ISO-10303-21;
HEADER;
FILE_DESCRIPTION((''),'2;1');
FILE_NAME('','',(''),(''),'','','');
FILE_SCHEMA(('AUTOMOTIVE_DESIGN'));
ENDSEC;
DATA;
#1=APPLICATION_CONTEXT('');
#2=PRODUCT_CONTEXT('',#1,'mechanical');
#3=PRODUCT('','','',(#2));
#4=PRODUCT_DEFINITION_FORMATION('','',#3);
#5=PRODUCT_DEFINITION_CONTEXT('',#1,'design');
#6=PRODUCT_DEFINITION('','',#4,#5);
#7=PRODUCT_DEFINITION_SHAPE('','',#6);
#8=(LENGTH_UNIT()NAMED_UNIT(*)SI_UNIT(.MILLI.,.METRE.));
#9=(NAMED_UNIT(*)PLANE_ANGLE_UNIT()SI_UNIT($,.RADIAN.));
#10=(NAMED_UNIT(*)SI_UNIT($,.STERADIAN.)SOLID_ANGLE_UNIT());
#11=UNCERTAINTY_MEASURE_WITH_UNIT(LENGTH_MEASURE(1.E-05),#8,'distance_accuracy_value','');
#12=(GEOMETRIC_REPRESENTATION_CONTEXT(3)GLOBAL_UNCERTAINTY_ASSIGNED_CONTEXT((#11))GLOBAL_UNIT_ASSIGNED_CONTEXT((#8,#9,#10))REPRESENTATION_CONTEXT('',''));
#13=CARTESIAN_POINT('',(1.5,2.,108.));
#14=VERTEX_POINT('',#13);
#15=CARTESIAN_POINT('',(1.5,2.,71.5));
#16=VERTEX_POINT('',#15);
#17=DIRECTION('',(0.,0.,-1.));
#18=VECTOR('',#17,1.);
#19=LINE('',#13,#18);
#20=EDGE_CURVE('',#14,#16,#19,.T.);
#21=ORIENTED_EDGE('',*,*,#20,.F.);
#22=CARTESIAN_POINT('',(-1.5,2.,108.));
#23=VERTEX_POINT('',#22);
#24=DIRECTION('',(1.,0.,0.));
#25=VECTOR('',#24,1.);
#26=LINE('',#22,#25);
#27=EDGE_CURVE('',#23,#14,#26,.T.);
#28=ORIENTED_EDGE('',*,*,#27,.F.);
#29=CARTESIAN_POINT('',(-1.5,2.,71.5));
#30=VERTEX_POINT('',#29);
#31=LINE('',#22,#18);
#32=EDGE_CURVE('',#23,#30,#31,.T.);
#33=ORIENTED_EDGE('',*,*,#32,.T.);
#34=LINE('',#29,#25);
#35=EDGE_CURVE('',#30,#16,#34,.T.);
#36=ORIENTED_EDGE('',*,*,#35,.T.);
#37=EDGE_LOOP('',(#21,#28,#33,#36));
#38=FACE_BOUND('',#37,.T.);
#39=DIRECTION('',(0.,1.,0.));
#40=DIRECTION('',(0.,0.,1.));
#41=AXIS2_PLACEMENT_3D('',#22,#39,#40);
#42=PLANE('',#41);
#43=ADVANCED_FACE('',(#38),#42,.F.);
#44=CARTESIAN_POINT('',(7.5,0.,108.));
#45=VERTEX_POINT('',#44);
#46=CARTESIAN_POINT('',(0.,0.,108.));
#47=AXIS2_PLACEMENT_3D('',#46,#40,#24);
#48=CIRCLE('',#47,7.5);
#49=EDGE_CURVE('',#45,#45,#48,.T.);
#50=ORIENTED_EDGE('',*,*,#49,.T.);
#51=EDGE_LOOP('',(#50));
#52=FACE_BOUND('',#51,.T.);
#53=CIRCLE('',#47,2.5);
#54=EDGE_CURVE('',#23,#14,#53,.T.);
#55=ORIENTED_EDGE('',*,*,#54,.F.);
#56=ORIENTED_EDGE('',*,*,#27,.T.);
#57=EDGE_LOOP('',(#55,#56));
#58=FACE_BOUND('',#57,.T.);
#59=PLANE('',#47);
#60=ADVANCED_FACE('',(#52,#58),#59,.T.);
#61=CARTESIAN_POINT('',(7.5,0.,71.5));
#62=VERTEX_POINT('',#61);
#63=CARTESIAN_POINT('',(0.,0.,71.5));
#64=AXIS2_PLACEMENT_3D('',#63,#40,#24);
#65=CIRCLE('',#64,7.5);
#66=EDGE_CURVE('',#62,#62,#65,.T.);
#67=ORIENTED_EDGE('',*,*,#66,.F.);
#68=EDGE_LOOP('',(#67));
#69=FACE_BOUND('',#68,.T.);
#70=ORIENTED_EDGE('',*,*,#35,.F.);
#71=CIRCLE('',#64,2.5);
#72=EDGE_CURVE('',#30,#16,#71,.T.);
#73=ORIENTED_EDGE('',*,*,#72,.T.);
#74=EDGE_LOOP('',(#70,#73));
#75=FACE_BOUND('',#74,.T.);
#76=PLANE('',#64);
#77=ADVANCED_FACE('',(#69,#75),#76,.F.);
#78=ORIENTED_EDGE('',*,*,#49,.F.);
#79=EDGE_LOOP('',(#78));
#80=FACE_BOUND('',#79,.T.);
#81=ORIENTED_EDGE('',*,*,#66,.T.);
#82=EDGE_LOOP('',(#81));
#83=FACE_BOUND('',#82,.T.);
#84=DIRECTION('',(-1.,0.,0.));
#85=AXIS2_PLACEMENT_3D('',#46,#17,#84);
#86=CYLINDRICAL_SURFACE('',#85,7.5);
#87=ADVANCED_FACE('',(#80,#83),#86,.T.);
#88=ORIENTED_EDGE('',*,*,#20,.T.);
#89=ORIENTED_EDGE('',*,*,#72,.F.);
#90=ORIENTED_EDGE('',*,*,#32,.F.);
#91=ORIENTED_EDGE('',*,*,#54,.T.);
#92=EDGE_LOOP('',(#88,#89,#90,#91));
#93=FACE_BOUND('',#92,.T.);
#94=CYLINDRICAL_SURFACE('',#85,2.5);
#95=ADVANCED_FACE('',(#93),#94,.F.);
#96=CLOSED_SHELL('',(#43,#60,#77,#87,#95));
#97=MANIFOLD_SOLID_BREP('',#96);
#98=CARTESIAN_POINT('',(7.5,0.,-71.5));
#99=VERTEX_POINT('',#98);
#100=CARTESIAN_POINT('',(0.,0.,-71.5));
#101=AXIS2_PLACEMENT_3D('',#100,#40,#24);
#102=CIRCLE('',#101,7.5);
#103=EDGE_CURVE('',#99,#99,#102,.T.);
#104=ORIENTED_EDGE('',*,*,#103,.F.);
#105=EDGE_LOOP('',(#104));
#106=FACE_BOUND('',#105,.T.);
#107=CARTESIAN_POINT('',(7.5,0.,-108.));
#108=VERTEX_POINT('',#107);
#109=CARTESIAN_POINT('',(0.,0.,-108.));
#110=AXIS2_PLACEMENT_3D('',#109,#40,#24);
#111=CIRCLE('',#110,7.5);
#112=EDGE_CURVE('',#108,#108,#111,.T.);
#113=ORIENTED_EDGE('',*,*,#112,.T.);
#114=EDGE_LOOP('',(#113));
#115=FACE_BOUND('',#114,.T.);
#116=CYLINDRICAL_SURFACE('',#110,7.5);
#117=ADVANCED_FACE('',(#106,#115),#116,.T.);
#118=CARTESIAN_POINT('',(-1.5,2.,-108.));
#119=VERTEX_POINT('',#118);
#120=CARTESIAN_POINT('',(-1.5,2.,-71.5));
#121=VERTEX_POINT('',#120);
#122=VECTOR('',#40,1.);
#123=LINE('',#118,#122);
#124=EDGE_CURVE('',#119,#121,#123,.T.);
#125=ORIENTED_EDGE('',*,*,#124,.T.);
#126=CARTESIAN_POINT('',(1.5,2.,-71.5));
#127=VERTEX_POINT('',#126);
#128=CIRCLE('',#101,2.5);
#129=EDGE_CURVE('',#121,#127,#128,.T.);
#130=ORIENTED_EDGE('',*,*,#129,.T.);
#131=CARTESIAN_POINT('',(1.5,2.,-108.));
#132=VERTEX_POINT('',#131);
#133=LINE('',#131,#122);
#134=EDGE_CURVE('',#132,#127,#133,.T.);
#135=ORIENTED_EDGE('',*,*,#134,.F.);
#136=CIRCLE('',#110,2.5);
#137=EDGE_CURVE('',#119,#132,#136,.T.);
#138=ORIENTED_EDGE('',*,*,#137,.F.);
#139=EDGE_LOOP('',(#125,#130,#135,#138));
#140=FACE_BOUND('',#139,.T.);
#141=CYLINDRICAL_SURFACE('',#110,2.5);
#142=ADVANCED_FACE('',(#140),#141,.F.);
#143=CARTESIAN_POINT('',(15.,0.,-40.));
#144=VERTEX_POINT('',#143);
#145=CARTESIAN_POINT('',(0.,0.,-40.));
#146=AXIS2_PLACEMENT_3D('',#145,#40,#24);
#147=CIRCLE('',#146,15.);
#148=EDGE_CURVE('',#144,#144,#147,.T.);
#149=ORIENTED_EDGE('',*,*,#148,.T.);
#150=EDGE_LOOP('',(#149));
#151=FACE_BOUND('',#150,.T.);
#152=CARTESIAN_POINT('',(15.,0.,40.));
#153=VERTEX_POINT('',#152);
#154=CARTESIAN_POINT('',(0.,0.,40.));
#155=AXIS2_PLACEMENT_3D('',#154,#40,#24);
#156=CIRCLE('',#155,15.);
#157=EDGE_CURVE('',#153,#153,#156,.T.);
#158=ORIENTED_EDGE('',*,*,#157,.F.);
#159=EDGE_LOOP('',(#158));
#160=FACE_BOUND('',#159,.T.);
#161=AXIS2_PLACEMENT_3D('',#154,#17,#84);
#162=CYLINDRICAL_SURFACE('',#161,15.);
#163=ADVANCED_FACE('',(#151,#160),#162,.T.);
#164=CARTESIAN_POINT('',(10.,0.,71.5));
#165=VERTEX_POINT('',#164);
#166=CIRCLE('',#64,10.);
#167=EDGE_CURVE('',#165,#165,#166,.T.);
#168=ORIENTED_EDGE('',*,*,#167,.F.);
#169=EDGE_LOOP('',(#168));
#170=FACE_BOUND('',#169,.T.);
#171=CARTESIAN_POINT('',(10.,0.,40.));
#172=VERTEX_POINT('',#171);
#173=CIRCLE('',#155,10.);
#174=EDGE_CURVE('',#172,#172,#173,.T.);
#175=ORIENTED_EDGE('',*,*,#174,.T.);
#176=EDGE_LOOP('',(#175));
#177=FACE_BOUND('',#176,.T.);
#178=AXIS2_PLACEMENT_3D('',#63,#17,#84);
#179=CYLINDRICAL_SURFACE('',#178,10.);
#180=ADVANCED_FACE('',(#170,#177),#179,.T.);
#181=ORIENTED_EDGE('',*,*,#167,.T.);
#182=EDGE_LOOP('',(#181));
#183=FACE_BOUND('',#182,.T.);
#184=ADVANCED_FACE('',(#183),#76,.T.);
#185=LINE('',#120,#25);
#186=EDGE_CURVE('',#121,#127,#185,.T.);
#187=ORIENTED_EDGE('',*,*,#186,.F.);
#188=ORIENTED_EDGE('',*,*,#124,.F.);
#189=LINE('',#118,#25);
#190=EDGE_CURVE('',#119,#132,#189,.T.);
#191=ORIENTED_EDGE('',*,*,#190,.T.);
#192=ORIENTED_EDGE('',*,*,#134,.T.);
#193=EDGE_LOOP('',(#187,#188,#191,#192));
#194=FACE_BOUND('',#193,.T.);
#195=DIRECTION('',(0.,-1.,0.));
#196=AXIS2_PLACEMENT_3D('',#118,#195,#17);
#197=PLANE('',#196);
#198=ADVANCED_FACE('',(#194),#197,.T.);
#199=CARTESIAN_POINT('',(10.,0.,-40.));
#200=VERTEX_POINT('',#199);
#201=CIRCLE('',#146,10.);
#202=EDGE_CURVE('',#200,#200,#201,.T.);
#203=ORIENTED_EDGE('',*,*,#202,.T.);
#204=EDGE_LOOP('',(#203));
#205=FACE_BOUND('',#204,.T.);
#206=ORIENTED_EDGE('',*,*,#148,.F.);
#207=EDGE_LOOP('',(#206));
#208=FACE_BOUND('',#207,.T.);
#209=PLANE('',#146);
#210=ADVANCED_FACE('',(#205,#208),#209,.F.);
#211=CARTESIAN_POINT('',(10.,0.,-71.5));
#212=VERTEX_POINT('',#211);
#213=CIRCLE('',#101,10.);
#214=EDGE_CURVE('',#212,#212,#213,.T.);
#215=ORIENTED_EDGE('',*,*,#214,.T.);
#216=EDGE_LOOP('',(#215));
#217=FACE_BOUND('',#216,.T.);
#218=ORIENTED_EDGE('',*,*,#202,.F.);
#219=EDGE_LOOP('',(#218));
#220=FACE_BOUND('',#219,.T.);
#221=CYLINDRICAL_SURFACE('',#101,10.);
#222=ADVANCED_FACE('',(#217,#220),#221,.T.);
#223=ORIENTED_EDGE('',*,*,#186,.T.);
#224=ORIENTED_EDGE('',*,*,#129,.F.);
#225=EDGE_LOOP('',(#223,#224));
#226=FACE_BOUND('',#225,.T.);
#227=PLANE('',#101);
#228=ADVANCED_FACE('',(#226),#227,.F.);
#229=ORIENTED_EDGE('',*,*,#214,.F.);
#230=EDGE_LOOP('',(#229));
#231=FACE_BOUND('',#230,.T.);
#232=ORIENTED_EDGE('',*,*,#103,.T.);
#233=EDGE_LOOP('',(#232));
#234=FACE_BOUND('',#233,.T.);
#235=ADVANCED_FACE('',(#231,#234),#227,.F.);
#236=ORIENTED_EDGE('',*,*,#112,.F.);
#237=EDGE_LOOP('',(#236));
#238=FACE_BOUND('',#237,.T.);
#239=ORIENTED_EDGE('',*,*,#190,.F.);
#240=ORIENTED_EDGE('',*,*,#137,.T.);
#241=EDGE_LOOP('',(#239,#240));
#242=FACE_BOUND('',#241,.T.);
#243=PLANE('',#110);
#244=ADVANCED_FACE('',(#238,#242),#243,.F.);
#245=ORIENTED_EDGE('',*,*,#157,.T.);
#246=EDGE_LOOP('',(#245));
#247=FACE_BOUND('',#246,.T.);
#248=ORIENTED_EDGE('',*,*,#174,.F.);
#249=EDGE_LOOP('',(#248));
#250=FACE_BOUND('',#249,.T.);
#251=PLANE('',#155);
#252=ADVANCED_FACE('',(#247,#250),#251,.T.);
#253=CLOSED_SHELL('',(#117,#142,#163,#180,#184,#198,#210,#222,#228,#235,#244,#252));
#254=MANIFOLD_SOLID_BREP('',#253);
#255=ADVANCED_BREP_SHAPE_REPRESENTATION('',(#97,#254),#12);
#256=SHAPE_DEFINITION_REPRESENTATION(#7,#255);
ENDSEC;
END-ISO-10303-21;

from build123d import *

# Parameters (mm, degrees)
ESQUISSE1_R        = 15
BOSS_EXTRU_1_DEPTH = 40
BOSS_EXTRU_5_START = 40
ESQUISSE1_10_R     = 10
BOSS_EXTRU_5_DEPTH = 31.5
BOSS_EXTRU_3_START = 71.5
ESQUISSE1_7_R      = 7.5
BOSS_EXTRU_3_DEPTH = 36.5
BOSS_EXTRU_4_START = -71.5
ESQUISSE1_8_R      = 7.5
BOSS_EXTRU_4_DEPTH = 36.5
BOSS_EXTRU_6_START = -71.5
ESQUISSE1_11_R     = 10
BOSS_EXTRU_6_DEPTH = 31.5


with BuildPart() as part:
    # Esquisse1 → Boss.-Extru.1 (new, symmetric)
    with BuildSketch(Plane.XY):
        Circle(ESQUISSE1_R)
    extrude(amount=BOSS_EXTRU_1_DEPTH, both=True)

    # Esquisse1<10> → Boss.-Extru.5 (add)
    with BuildSketch(Plane.XY.offset(BOSS_EXTRU_5_START)):
        Circle(ESQUISSE1_10_R)
    extrude(amount=BOSS_EXTRU_5_DEPTH)



with BuildPart() as body_2:
    # Esquisse1<7> → Boss.-Extru.3 (new body)
    with BuildSketch(Plane.XY.offset(BOSS_EXTRU_3_START)):
        Circle(ESQUISSE1_7_R)
        with BuildLine():
            Line((-1.5, 2), (1.5, 2))
            ThreePointArc((1.5, 2), (0, -2.5), (-1.5, 2))
        make_face(mode=Mode.SUBTRACT)
    extrude(amount=BOSS_EXTRU_3_DEPTH)


with BuildPart() as body_3:
    # Esquisse1<8> → Boss.-Extru.4 (new body)
    with BuildSketch(Plane.XY.offset(BOSS_EXTRU_4_START)):
        Circle(ESQUISSE1_8_R)
        with BuildLine():
            Line((-1.5, 2), (1.5, 2))
            ThreePointArc((1.5, 2), (0, -2.5), (-1.5, 2))
        make_face(mode=Mode.SUBTRACT)
    extrude(amount=-BOSS_EXTRU_4_DEPTH)


with BuildPart() as part_1:
    add(part.part)

    add(body_3.part)  # Boss.-Extru.6 merges body 3
    # Esquisse1<11> → Boss.-Extru.6 (add)
    with BuildSketch(Plane.XY.offset(BOSS_EXTRU_6_START)):
        Circle(ESQUISSE1_11_R)
    extrude(amount=BOSS_EXTRU_6_DEPTH)


solid = Compound([body_2.part, part_1.part])
